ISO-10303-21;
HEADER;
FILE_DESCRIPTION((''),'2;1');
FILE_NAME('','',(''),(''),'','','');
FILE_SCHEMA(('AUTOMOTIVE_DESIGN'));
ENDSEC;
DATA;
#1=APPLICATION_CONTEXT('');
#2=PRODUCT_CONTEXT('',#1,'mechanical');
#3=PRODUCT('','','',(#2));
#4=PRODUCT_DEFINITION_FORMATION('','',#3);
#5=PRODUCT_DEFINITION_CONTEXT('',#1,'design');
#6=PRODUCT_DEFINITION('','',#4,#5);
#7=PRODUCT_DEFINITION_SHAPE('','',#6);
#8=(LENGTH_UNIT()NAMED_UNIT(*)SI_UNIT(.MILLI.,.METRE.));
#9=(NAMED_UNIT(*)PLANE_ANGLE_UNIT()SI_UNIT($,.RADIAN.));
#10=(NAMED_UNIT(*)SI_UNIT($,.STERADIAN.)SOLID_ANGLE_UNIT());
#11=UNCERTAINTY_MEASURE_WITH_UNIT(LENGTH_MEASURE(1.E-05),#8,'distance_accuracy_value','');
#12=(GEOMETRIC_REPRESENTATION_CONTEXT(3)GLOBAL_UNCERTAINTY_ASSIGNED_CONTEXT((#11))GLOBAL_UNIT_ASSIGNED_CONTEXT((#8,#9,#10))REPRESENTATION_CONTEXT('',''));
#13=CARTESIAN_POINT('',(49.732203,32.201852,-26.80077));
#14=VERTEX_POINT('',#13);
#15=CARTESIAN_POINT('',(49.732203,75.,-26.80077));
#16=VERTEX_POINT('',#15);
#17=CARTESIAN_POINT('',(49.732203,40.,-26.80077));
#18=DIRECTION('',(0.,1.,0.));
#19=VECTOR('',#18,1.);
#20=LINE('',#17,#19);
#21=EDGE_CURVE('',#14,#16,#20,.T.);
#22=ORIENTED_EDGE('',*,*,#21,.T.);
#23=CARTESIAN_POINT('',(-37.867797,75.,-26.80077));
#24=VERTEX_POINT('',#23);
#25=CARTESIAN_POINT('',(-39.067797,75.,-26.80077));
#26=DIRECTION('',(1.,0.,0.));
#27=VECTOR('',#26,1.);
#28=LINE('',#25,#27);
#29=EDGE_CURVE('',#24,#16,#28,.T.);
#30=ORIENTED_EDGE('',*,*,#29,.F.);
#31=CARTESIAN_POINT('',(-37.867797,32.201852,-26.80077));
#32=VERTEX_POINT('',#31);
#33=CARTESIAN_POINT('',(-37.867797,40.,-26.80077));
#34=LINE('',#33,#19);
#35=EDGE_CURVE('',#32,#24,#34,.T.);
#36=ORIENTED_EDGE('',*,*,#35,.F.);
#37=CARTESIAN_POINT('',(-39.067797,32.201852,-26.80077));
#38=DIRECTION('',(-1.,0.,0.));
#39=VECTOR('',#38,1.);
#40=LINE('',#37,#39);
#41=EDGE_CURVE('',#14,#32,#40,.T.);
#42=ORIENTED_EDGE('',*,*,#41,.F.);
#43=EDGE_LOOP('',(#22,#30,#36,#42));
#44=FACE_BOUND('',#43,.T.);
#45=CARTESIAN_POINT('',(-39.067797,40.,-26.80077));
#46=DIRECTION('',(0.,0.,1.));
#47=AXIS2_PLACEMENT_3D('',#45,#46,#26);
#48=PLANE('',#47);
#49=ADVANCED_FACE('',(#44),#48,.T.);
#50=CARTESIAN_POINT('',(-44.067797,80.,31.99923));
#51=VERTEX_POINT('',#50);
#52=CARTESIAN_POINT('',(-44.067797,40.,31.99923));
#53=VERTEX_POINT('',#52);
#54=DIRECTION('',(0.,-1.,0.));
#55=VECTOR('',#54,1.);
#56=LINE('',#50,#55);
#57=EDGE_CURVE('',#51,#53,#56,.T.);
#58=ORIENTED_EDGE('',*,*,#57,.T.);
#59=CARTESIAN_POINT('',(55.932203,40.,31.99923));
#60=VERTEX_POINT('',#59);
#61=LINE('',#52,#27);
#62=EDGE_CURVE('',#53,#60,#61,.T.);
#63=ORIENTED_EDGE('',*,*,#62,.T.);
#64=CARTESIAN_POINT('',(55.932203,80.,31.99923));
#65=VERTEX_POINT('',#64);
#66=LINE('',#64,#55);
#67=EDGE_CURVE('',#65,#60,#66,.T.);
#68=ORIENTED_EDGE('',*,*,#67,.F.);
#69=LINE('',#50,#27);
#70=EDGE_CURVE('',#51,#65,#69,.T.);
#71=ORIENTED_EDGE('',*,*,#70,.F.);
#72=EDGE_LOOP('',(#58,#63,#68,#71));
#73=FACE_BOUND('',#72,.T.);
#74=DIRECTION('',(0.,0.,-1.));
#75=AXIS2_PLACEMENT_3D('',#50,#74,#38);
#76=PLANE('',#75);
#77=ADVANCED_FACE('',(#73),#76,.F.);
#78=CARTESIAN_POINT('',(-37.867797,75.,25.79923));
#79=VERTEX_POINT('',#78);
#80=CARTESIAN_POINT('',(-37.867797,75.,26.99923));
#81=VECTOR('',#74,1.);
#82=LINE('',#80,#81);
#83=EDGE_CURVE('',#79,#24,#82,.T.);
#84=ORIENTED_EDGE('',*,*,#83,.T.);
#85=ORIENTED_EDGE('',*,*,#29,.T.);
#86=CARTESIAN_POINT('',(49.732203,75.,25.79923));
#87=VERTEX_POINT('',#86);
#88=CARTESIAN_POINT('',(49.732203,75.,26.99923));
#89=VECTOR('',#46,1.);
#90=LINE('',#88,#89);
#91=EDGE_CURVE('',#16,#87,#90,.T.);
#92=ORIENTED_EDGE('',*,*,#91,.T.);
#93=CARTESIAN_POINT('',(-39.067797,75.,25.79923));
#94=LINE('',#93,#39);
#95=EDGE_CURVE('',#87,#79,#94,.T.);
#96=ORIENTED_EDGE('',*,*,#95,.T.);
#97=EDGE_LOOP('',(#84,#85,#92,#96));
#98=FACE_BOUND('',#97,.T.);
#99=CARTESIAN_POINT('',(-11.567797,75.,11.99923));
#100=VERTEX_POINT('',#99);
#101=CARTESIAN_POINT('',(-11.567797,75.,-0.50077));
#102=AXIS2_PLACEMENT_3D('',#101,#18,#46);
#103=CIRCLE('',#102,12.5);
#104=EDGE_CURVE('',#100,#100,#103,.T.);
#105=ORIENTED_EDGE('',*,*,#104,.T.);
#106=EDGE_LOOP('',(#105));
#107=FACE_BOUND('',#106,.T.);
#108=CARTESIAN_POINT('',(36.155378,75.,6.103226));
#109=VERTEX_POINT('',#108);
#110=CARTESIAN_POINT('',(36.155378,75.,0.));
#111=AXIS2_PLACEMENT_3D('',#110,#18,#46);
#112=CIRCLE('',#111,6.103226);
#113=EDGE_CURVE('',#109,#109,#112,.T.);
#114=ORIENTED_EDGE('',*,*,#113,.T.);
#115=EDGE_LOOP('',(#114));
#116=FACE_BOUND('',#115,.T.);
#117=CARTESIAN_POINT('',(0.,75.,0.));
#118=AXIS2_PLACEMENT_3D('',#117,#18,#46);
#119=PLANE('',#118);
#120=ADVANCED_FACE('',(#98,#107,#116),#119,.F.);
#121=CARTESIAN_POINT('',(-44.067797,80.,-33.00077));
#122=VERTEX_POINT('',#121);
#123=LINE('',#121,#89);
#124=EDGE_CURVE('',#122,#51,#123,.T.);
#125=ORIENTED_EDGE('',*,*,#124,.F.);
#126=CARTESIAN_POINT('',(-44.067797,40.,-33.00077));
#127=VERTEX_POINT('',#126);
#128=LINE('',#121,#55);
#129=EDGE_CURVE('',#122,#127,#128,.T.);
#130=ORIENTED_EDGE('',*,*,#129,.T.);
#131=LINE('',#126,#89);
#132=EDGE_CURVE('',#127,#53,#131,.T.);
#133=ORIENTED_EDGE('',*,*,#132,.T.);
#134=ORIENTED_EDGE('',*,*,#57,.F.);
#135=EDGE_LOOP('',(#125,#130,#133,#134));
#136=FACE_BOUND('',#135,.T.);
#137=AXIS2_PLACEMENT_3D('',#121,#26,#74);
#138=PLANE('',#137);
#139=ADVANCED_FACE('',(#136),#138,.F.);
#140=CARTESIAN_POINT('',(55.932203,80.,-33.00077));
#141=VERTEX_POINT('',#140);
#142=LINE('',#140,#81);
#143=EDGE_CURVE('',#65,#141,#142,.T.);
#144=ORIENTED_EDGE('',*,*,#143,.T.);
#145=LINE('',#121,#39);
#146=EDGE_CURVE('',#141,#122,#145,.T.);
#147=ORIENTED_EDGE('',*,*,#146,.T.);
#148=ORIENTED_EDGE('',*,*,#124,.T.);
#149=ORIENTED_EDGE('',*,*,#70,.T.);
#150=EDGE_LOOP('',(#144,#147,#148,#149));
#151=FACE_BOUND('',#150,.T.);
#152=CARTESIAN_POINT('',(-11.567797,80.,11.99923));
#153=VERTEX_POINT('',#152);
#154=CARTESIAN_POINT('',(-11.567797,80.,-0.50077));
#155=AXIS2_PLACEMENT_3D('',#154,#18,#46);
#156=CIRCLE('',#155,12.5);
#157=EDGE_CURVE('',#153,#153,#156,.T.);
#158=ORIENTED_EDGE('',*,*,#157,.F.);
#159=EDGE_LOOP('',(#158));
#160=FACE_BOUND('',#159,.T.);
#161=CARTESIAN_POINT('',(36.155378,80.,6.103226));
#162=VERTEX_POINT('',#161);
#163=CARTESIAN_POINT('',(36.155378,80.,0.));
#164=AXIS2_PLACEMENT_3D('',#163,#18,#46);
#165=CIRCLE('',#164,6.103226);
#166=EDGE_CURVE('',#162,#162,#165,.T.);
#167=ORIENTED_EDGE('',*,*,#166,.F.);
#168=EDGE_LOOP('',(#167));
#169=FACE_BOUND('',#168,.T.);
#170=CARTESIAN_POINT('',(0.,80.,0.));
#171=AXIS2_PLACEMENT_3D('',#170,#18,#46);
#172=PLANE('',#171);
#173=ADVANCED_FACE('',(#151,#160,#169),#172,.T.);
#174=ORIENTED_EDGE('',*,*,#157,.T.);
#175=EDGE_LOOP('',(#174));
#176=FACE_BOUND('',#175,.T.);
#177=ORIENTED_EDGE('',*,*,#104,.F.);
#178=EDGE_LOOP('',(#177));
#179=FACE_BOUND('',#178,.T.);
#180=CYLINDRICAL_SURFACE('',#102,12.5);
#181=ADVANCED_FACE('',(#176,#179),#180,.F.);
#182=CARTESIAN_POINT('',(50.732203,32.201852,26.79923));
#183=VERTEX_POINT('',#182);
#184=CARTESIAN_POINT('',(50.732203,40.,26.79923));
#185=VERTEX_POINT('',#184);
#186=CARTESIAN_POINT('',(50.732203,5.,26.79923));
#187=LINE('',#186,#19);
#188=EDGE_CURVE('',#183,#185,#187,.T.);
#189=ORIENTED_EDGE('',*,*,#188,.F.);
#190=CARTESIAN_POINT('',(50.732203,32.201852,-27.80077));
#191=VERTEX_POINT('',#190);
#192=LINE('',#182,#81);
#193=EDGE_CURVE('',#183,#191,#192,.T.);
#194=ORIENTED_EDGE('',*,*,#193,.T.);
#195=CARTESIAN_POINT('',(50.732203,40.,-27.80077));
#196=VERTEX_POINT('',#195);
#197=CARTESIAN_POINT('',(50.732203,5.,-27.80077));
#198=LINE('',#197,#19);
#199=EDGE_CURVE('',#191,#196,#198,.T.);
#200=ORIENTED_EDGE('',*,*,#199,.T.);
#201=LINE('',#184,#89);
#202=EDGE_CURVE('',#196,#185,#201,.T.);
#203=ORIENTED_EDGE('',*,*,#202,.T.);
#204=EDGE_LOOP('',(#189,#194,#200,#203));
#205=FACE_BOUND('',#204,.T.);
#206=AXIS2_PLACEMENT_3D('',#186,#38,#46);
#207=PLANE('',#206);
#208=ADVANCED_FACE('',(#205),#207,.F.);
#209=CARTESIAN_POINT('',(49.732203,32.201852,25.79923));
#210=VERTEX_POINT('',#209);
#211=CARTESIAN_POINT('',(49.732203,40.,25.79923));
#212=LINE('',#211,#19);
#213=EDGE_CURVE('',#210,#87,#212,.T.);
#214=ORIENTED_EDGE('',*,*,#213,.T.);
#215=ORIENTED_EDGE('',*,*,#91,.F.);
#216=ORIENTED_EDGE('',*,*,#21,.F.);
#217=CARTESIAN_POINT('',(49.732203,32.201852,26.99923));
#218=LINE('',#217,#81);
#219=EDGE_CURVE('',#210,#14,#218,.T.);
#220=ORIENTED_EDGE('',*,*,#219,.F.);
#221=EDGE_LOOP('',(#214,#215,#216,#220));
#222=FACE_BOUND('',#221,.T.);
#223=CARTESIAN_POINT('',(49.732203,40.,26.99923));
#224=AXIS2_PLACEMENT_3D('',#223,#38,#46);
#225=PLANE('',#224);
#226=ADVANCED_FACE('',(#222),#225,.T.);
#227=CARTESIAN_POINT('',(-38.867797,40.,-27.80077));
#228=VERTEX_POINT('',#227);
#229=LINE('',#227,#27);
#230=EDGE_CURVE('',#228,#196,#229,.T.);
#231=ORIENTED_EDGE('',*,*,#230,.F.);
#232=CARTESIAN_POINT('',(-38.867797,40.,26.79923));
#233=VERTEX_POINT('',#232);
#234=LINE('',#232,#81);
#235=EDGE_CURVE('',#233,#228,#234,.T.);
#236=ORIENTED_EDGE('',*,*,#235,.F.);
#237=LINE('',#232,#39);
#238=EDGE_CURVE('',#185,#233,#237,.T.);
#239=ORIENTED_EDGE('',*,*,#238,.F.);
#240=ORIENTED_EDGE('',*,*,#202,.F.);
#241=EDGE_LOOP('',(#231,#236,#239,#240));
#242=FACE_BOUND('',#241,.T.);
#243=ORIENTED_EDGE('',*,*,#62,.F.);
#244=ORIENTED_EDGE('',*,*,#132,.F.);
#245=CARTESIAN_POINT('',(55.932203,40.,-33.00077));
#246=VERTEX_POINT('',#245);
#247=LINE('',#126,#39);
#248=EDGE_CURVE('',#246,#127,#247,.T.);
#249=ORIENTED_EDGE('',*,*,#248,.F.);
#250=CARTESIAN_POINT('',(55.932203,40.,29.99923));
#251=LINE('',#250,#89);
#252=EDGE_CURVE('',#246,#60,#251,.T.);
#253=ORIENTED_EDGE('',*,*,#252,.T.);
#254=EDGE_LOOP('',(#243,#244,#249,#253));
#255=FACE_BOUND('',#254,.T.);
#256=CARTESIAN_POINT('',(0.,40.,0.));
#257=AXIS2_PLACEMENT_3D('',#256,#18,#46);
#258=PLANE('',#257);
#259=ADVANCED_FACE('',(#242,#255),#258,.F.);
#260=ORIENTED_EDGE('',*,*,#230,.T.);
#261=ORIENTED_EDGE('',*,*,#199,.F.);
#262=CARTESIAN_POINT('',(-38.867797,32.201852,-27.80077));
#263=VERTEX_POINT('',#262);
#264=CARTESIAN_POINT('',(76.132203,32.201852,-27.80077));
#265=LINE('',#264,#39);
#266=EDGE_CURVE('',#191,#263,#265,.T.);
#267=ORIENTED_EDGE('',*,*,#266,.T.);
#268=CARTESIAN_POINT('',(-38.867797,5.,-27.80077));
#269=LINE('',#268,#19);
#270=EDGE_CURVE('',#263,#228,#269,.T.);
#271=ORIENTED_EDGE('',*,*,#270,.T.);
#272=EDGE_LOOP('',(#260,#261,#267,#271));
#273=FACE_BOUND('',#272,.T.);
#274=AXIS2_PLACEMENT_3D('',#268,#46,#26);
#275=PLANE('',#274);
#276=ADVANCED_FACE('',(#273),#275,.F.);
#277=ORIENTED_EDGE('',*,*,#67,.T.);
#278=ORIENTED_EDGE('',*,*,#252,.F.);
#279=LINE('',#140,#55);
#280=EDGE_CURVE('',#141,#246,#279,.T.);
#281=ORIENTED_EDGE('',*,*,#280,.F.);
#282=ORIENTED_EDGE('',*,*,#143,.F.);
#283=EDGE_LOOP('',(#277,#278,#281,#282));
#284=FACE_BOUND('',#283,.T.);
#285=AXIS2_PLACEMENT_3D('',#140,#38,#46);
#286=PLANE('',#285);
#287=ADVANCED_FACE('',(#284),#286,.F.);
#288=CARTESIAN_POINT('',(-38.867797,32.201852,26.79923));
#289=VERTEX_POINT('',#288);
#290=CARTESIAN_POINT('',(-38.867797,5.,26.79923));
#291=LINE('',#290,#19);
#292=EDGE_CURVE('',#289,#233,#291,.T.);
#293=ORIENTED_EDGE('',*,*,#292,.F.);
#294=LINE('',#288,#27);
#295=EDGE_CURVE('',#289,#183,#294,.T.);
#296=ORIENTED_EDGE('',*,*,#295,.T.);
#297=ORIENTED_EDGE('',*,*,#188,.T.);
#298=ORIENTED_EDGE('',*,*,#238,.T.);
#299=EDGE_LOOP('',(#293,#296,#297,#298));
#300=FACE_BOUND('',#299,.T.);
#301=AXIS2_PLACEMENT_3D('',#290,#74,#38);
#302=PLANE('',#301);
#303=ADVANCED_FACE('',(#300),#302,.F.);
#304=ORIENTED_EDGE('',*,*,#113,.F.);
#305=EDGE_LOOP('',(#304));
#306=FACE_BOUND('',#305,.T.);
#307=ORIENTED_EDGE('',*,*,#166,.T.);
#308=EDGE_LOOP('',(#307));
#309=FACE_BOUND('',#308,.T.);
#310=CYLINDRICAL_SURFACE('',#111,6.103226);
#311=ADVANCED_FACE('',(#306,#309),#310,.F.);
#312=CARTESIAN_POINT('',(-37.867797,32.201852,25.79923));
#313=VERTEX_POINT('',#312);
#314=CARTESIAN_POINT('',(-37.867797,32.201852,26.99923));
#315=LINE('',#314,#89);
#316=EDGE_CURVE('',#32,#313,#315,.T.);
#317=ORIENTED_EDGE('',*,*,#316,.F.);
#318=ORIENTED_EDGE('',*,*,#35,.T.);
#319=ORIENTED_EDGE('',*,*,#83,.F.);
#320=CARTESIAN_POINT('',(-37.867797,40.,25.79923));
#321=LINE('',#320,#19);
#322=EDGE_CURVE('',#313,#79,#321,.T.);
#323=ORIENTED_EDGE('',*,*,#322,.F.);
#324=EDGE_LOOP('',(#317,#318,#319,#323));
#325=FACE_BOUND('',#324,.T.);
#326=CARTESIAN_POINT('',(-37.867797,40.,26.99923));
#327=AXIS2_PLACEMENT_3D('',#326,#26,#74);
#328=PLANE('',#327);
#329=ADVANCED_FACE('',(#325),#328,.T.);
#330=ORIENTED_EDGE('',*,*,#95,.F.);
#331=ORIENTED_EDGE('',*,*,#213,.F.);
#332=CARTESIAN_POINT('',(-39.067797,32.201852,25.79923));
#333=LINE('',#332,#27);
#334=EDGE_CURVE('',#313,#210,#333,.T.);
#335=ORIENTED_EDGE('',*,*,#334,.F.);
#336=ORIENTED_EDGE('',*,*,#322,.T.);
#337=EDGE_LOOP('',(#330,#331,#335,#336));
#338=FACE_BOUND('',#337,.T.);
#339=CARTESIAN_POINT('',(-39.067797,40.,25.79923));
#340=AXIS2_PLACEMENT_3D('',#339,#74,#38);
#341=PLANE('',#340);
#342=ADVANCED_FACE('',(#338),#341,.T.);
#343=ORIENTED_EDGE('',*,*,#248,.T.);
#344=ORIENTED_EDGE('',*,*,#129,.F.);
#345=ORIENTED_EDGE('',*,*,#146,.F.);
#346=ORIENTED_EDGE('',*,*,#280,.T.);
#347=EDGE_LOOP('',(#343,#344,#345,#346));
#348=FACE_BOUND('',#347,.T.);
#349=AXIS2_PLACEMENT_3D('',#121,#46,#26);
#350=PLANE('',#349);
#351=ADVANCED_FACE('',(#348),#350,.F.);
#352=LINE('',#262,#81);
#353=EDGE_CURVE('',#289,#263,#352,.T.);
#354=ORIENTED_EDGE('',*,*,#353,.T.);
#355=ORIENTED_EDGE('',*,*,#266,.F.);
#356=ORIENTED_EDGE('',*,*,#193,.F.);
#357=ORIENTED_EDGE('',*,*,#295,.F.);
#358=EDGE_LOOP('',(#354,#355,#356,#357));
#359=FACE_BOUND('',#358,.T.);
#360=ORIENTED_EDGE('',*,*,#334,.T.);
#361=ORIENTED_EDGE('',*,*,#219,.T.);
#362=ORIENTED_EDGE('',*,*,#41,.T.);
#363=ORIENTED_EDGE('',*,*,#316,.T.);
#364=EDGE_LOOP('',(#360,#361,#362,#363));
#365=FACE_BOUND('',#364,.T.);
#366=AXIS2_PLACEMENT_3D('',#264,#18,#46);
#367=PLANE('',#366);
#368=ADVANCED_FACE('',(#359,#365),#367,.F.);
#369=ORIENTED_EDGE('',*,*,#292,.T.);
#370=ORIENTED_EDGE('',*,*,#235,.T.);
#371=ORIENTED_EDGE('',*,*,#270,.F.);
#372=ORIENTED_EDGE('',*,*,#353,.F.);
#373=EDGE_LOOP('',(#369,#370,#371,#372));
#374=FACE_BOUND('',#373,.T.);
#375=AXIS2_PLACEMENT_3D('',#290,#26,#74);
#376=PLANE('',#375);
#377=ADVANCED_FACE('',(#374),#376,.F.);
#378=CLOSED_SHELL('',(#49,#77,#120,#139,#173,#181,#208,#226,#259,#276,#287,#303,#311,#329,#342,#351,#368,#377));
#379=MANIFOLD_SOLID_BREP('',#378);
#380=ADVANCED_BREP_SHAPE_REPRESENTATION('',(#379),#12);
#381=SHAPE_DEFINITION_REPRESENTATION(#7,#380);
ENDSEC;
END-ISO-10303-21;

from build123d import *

# Parameters (mm, degrees)
STOCK_PART1_1_START         = 40
STOCK_PART1_1_OUTLINE_W     = 90
STOCK_PART1_1_OUTLINE_H     = 55
STOCK_PART1_1_DEPTH         = 40
STOCK_PART1_1_START_2       = 75
STOCK_PART1_1_2_OUTLINE_W   = 90
STOCK_PART1_1_2_OUTLINE_H   = 55
STOCK_PART1_1_2_OUTLINE_R   = 6.10322586
STOCK_PART1_1_2_OUTLINE_R_2 = 17.5
STOCK_PART1_1_2_DEPTH       = 5
SKETCH1_W                   = 5
SKETCH1_H                   = 8.27683309
SKETCH1_W_2                 = 4.100738493
SKETCH1_H_2                 = 4.176305195
SKETCH1_W_3                 = 4.702811088
SKETCH1_H_3                 = 4.424974218
SKETCH1_W_4                 = 6.384187924
SKETCH1_H_4                 = 4.971555085
BOSS_EXTRUDE2_DEPTH         = 40
SKETCH2_W                   = 90
SKETCH2_H                   = 55
SKETCH2_W_2                 = 87.6
SKETCH2_H_2                 = 52.6
EXTRUDE_THIN1_DEPTH         = 35
SKETCH3_W                   = 89.6
SKETCH3_H                   = 54.6
SKETCH3_W_2                 = 87.6
SKETCH3_H_2                 = 52.6
EXTRUDE_THIN2_DEPTH         = 35
SKETCH4_R                   = 23.5
SKETCH4_R_2                 = 12.5
EXTRUDE_THIN3_DEPTH         = 5
SKETCH5_W                   = 54.6
SKETCH5_H                   = 27.201852287
CUT_EXTRUDE1_DEPTH          = 115


# Read off the part's stored shape, not the designer's step: Stock-Part1-1
with BuildPart() as part:
    # Stock-Part1-1 outline → Stock-Part1-1 (new body)
    with BuildSketch(Plane(origin=(0, 0, 0), x_dir=(1, 0, 0), z_dir=(0, 1, 0)).offset(STOCK_PART1_1_START)):
        with BuildLine():
            Line((55.93220339, -29.999229584), (55.93220339, 31.000770416))
            ThreePointArc((55.93220339, 31.000770416), (52.517989827, 29.586556854), (53.93220339, 33.000770416))
            Line((53.93220339, 33.000770416), (-42.06779661, 33.000770416))
            ThreePointArc((-42.06779661, 33.000770416), (-40.653583048, 29.586556854), (-44.06779661, 31.000770416))
            Line((-44.06779661, 31.000770416), (-44.06779661, -29.999229584))
            ThreePointArc((-44.06779661, -29.999229584), (-40.653583048, -28.585016022), (-42.06779661, -31.999229584))
            Line((-42.06779661, -31.999229584), (53.93220339, -31.999229584))
            ThreePointArc((53.93220339, -31.999229584), (52.517989827, -28.585016021), (55.93220339, -29.999229584))
        make_face()
        with Locations((5.93220339, 0.500770416)):
            Rectangle(STOCK_PART1_1_OUTLINE_W, STOCK_PART1_1_OUTLINE_H, mode=Mode.SUBTRACT)
    extrude(amount=STOCK_PART1_1_DEPTH)

    # Stock-Part1-1 2 outline → Stock-Part1-1 2 (add)
    with BuildSketch(Plane(origin=(0, 0, 0), x_dir=(1, 0, 0), z_dir=(0, 1, 0)).offset(STOCK_PART1_1_START_2)):
        with Locations((5.93220339, 0.500770416)):
            Rectangle(STOCK_PART1_1_2_OUTLINE_W, STOCK_PART1_1_2_OUTLINE_H)
        with Locations((36.155377847, 0)):
            Circle(STOCK_PART1_1_2_OUTLINE_R, mode=Mode.SUBTRACT)
        with Locations((-11.56779661, 0.500770416)):
            Circle(STOCK_PART1_1_2_OUTLINE_R_2, mode=Mode.SUBTRACT)
    extrude(amount=STOCK_PART1_1_2_DEPTH)

    # Sketch1 → Boss-Extrude2 (add)
    with BuildSketch(Plane.XZ.offset(-40)):
        with Locations((-41.56779661, -28.862353871)):
            Rectangle(SKETCH1_W, SKETCH1_H)
        with Locations((53.881834144, -30.912617819)):
            Rectangle(SKETCH1_W_2, SKETCH1_H_2)
        with Locations((53.580797846, 29.786742475)):
            Rectangle(SKETCH1_W_3, SKETCH1_H_3)
        with Locations((-40.875702648, 29.513452042)):
            Rectangle(SKETCH1_W_4, SKETCH1_H_4)
    extrude(amount=-BOSS_EXTRUDE2_DEPTH)

    # Sketch2 → Extrude-Thin1 (add)
    with BuildSketch(Plane.XZ.offset(-75)):
        with Locations((5.93220339, -0.500770416)):
            Rectangle(SKETCH2_W, SKETCH2_H)
        with Locations((5.93220339, -0.500770416)):
            Rectangle(SKETCH2_W_2, SKETCH2_H_2, mode=Mode.SUBTRACT)
    extrude(amount=EXTRUDE_THIN1_DEPTH)

    # Sketch3 → Extrude-Thin2 (add)
    with BuildSketch(Plane.XZ.offset(-40)):
        with Locations((5.93220339, -0.500770416)):
            Rectangle(SKETCH3_W, SKETCH3_H)
        with Locations((5.93220339, -0.500770416)):
            Rectangle(SKETCH3_W_2, SKETCH3_H_2, mode=Mode.SUBTRACT)
    extrude(amount=EXTRUDE_THIN2_DEPTH)

    # Sketch4 → Extrude-Thin3 (add)
    with BuildSketch(Plane(origin=(0, 80, 0), x_dir=(1, 0, 0), z_dir=(0, 1, 0))):
        with Locations((-11.56779661, 0.500770416)):
            Circle(SKETCH4_R)
        with Locations((-11.56779661, 0.500770416)):
            Circle(SKETCH4_R_2, mode=Mode.SUBTRACT)
    extrude(amount=-EXTRUDE_THIN3_DEPTH)

    # Sketch5 → Cut-Extrude1 (cut)
    with BuildSketch(Plane.ZY.offset(38.86779661)):
        with Locations((-0.500770416, 18.600926144)):
            Rectangle(SKETCH5_W, SKETCH5_H)
    extrude(amount=-CUT_EXTRUDE1_DEPTH, mode=Mode.SUBTRACT)


solid = part.part
